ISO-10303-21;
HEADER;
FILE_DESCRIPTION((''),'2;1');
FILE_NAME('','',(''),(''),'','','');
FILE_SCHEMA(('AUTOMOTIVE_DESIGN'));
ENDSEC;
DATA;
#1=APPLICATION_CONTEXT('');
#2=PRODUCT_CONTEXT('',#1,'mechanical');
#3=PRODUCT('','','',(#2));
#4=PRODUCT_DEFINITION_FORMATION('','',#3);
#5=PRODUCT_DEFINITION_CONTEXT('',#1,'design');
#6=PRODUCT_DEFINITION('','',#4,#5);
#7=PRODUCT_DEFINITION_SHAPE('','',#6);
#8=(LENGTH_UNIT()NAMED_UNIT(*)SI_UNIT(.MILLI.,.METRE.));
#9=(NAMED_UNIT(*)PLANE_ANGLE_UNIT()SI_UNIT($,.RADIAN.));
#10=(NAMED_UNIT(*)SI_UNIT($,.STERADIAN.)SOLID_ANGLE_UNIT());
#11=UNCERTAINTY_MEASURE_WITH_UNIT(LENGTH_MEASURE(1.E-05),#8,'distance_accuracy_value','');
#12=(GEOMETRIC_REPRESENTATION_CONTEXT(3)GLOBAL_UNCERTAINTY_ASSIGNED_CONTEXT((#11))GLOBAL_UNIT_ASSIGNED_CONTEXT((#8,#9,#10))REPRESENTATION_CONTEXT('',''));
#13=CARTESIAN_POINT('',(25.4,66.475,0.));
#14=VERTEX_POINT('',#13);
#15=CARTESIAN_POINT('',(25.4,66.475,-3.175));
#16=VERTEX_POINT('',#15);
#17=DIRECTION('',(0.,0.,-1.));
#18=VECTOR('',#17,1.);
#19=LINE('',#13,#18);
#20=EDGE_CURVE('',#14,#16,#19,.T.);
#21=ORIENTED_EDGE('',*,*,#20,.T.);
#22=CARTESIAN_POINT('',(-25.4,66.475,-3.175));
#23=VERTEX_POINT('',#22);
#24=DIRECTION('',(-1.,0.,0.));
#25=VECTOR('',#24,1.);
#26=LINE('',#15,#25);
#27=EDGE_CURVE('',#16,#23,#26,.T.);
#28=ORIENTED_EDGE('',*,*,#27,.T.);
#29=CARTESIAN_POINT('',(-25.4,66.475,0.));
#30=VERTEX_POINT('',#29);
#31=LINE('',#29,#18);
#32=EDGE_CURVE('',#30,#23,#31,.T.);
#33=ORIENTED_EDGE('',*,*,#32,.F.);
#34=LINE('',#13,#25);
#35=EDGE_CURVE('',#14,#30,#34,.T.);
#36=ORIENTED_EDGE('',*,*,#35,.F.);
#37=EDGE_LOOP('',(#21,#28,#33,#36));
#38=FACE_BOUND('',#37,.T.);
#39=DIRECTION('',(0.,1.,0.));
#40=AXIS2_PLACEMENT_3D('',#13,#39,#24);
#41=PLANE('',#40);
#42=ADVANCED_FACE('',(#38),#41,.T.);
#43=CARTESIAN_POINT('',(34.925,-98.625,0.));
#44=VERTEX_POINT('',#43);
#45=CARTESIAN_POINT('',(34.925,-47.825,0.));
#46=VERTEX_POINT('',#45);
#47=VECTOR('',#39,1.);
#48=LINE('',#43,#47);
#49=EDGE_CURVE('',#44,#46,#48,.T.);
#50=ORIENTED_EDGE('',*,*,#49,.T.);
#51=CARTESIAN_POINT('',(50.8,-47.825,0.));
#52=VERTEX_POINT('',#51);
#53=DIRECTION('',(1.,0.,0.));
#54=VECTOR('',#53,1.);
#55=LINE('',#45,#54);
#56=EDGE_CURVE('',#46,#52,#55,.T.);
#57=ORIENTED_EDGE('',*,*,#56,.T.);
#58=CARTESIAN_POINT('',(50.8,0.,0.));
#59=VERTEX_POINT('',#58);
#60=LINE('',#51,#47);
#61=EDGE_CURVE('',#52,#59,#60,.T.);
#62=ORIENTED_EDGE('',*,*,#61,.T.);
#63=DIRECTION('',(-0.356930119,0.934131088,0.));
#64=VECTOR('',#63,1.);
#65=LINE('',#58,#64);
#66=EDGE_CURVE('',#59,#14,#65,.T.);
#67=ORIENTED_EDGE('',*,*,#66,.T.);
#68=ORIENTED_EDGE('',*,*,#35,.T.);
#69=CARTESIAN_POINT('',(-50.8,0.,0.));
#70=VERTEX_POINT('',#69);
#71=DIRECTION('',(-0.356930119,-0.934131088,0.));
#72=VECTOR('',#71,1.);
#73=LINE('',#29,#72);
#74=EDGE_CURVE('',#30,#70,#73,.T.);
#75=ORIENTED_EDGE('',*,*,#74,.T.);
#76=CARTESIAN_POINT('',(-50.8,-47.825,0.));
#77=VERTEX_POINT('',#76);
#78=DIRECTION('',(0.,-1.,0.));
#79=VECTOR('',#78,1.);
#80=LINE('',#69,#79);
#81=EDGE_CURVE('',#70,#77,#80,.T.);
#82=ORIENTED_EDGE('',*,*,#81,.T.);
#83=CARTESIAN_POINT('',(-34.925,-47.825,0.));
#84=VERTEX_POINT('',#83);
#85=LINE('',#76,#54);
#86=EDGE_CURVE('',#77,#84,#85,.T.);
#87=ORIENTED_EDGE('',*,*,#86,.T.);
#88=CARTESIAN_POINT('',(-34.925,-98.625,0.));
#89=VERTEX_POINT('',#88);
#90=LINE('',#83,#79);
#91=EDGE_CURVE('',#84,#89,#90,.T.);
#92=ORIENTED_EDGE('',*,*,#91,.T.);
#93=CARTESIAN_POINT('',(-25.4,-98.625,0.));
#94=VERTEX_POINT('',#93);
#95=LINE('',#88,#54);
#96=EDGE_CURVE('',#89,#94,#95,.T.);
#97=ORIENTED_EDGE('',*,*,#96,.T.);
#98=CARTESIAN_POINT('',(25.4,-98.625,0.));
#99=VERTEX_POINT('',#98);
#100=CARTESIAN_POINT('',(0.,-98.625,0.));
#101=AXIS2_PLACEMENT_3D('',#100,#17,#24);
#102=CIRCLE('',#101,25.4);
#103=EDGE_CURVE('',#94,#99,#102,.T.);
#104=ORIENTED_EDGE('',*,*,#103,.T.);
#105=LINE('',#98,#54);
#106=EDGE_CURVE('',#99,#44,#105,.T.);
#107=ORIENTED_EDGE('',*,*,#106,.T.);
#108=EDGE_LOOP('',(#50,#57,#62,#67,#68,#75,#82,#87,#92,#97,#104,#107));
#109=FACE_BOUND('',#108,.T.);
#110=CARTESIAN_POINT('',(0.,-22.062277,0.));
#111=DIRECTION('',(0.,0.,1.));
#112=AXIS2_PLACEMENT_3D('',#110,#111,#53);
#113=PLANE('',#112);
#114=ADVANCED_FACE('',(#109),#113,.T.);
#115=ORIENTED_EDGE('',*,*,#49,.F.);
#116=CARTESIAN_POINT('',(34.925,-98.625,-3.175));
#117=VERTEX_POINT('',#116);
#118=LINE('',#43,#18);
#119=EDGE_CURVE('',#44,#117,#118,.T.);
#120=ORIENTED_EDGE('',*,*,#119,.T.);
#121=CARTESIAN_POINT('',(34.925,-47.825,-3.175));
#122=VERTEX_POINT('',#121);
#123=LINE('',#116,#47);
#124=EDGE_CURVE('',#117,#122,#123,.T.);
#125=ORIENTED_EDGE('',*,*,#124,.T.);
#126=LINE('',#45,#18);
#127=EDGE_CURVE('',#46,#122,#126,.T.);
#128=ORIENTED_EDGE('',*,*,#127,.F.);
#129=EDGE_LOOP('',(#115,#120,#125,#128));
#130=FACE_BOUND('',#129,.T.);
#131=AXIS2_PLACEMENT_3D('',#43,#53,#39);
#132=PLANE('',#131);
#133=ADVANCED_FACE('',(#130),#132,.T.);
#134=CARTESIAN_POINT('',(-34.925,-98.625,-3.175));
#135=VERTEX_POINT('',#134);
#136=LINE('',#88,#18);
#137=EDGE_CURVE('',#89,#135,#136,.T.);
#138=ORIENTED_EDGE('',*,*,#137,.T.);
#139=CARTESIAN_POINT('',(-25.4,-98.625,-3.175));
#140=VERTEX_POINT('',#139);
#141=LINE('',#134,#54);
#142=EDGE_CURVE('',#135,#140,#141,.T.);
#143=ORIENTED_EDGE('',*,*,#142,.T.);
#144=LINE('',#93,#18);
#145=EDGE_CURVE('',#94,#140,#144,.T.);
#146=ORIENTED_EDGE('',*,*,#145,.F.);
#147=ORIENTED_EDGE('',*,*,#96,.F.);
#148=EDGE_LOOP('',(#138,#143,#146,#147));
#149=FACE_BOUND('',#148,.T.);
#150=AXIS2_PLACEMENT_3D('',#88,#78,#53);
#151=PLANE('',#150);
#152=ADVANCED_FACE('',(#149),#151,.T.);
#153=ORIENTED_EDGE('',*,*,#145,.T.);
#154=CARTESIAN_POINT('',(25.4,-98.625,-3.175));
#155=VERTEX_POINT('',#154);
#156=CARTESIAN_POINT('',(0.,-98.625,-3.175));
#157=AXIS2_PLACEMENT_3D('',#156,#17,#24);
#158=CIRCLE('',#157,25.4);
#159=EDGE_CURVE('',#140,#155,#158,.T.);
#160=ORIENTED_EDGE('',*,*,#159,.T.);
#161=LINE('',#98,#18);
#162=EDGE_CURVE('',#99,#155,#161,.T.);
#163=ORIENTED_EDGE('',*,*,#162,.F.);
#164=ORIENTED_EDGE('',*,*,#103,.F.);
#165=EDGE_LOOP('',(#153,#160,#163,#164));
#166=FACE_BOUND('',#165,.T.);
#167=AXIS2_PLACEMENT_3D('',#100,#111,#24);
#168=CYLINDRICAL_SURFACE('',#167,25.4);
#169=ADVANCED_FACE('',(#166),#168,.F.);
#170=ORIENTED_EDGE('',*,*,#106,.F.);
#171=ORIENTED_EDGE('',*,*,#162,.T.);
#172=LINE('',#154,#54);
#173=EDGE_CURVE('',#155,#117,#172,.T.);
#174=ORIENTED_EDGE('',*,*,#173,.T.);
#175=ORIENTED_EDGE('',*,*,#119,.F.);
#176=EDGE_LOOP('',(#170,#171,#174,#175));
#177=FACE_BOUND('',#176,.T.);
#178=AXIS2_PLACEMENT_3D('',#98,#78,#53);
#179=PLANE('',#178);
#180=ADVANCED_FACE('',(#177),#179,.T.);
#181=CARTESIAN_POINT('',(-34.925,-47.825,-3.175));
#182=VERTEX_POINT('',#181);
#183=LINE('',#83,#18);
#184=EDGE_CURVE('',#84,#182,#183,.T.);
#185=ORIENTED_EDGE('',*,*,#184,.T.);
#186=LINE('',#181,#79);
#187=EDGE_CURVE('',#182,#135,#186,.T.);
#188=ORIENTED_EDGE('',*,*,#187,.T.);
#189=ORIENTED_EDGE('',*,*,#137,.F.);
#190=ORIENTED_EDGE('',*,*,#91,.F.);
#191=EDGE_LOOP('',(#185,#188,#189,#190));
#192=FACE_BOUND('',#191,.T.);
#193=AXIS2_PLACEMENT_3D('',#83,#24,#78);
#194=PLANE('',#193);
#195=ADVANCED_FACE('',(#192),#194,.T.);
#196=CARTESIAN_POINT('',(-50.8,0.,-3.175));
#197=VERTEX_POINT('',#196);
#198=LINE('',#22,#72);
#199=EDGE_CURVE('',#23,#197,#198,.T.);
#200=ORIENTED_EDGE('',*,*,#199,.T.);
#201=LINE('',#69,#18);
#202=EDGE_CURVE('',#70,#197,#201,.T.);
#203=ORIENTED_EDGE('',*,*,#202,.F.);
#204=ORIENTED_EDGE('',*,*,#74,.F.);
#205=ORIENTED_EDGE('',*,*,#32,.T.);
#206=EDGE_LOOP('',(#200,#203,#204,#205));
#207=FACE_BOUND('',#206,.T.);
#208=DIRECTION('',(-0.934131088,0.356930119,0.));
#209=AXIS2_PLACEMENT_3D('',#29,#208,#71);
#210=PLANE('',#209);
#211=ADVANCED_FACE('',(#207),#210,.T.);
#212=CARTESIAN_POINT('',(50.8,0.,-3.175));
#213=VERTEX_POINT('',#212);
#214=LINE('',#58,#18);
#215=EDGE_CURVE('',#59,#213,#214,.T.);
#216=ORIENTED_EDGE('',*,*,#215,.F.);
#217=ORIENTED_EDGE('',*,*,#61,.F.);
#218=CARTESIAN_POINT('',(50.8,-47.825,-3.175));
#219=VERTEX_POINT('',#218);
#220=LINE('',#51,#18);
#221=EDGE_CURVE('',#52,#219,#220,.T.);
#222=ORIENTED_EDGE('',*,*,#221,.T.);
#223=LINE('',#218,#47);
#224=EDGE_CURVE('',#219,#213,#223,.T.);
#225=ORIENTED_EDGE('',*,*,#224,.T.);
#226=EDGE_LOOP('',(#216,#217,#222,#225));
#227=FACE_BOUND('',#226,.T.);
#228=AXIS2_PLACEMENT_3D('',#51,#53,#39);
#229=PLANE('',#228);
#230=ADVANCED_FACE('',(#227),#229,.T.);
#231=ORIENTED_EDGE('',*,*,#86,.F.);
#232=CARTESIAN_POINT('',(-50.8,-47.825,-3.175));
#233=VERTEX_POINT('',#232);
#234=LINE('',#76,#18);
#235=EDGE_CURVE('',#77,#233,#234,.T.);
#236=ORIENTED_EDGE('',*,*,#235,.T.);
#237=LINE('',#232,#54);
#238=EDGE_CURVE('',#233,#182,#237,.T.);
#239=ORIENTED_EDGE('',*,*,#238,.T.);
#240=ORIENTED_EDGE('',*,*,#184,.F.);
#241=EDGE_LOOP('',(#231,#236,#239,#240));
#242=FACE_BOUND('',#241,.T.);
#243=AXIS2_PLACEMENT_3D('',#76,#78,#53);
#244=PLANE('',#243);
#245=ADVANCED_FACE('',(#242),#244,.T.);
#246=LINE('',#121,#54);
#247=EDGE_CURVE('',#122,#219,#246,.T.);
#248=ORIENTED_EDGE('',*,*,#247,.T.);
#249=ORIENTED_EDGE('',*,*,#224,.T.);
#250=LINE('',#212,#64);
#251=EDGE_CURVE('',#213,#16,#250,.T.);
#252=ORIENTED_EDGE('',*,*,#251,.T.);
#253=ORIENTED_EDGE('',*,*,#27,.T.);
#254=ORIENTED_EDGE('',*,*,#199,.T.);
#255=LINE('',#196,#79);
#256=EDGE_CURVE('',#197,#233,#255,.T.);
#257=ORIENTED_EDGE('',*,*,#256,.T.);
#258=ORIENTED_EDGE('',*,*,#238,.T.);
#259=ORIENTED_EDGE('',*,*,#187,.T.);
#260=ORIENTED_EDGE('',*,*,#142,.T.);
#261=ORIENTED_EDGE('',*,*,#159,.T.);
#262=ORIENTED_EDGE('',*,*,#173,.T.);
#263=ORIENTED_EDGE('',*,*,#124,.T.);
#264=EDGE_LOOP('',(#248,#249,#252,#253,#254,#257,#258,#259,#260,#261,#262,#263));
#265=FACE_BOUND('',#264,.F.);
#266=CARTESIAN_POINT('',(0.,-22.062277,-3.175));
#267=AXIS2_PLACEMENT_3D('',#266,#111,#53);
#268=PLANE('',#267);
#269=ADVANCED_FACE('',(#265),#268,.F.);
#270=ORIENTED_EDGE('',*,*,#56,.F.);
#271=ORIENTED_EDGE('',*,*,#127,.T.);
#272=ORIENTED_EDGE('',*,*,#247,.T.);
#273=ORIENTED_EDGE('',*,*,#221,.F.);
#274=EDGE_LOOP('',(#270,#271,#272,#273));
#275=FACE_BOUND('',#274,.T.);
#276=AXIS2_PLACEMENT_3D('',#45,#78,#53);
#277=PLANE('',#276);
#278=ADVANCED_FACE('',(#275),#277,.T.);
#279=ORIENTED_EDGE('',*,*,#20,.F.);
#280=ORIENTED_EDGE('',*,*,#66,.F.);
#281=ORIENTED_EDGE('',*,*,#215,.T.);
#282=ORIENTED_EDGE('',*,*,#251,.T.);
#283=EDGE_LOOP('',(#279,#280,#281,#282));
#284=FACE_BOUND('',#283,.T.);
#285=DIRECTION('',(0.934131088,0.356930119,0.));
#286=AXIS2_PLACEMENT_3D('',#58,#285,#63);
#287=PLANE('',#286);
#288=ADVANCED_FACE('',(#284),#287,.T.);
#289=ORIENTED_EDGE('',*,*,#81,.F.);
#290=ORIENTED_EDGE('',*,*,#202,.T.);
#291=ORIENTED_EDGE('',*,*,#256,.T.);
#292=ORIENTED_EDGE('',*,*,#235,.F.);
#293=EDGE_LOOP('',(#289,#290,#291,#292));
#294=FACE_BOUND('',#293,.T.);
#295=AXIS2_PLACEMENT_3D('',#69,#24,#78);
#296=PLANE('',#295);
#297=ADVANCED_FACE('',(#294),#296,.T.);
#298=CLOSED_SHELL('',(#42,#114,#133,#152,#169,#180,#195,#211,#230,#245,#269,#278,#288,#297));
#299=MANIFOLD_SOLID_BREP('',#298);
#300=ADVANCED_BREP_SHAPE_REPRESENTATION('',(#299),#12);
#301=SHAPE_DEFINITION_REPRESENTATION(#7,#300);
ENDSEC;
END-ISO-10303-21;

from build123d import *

# Parameters (mm, degrees)
F1_DEPTH = 3.175


# Not quite as in the source:
# - a length typed as a fraction of an inch, garbled in the dataset ("3 / 203.2 mm" for 3/8 in), is restored


with BuildPart() as f1:
    # F0 (on Top) → F1 (new body)
    with BuildSketch(Plane.XY):
        with BuildLine():
            Line((50.8, 0), (25.4, 66.475))
            Line((25.4, 66.475), (-25.4, 66.475))
            Line((-25.4, 66.475), (-50.8, 0))
            Line((-50.8, 0), (-50.8, -47.825))
            Line((-50.8, -47.825), (-34.925, -47.825))
            Line((-34.925, -47.825), (-34.925, -98.625))
            Line((-34.925, -98.625), (-25.4, -98.625))
            ThreePointArc((-25.4, -98.625), (0, -73.225), (25.4, -98.625))
            Line((25.4, -98.625), (34.925, -98.625))
            Line((34.925, -98.625), (34.925, -47.825))
            Line((34.925, -47.825), (50.8, -47.825))
            Line((50.8, -47.825), (50.8, 0))
        make_face()
    extrude(amount=-F1_DEPTH)


solid = f1.part
